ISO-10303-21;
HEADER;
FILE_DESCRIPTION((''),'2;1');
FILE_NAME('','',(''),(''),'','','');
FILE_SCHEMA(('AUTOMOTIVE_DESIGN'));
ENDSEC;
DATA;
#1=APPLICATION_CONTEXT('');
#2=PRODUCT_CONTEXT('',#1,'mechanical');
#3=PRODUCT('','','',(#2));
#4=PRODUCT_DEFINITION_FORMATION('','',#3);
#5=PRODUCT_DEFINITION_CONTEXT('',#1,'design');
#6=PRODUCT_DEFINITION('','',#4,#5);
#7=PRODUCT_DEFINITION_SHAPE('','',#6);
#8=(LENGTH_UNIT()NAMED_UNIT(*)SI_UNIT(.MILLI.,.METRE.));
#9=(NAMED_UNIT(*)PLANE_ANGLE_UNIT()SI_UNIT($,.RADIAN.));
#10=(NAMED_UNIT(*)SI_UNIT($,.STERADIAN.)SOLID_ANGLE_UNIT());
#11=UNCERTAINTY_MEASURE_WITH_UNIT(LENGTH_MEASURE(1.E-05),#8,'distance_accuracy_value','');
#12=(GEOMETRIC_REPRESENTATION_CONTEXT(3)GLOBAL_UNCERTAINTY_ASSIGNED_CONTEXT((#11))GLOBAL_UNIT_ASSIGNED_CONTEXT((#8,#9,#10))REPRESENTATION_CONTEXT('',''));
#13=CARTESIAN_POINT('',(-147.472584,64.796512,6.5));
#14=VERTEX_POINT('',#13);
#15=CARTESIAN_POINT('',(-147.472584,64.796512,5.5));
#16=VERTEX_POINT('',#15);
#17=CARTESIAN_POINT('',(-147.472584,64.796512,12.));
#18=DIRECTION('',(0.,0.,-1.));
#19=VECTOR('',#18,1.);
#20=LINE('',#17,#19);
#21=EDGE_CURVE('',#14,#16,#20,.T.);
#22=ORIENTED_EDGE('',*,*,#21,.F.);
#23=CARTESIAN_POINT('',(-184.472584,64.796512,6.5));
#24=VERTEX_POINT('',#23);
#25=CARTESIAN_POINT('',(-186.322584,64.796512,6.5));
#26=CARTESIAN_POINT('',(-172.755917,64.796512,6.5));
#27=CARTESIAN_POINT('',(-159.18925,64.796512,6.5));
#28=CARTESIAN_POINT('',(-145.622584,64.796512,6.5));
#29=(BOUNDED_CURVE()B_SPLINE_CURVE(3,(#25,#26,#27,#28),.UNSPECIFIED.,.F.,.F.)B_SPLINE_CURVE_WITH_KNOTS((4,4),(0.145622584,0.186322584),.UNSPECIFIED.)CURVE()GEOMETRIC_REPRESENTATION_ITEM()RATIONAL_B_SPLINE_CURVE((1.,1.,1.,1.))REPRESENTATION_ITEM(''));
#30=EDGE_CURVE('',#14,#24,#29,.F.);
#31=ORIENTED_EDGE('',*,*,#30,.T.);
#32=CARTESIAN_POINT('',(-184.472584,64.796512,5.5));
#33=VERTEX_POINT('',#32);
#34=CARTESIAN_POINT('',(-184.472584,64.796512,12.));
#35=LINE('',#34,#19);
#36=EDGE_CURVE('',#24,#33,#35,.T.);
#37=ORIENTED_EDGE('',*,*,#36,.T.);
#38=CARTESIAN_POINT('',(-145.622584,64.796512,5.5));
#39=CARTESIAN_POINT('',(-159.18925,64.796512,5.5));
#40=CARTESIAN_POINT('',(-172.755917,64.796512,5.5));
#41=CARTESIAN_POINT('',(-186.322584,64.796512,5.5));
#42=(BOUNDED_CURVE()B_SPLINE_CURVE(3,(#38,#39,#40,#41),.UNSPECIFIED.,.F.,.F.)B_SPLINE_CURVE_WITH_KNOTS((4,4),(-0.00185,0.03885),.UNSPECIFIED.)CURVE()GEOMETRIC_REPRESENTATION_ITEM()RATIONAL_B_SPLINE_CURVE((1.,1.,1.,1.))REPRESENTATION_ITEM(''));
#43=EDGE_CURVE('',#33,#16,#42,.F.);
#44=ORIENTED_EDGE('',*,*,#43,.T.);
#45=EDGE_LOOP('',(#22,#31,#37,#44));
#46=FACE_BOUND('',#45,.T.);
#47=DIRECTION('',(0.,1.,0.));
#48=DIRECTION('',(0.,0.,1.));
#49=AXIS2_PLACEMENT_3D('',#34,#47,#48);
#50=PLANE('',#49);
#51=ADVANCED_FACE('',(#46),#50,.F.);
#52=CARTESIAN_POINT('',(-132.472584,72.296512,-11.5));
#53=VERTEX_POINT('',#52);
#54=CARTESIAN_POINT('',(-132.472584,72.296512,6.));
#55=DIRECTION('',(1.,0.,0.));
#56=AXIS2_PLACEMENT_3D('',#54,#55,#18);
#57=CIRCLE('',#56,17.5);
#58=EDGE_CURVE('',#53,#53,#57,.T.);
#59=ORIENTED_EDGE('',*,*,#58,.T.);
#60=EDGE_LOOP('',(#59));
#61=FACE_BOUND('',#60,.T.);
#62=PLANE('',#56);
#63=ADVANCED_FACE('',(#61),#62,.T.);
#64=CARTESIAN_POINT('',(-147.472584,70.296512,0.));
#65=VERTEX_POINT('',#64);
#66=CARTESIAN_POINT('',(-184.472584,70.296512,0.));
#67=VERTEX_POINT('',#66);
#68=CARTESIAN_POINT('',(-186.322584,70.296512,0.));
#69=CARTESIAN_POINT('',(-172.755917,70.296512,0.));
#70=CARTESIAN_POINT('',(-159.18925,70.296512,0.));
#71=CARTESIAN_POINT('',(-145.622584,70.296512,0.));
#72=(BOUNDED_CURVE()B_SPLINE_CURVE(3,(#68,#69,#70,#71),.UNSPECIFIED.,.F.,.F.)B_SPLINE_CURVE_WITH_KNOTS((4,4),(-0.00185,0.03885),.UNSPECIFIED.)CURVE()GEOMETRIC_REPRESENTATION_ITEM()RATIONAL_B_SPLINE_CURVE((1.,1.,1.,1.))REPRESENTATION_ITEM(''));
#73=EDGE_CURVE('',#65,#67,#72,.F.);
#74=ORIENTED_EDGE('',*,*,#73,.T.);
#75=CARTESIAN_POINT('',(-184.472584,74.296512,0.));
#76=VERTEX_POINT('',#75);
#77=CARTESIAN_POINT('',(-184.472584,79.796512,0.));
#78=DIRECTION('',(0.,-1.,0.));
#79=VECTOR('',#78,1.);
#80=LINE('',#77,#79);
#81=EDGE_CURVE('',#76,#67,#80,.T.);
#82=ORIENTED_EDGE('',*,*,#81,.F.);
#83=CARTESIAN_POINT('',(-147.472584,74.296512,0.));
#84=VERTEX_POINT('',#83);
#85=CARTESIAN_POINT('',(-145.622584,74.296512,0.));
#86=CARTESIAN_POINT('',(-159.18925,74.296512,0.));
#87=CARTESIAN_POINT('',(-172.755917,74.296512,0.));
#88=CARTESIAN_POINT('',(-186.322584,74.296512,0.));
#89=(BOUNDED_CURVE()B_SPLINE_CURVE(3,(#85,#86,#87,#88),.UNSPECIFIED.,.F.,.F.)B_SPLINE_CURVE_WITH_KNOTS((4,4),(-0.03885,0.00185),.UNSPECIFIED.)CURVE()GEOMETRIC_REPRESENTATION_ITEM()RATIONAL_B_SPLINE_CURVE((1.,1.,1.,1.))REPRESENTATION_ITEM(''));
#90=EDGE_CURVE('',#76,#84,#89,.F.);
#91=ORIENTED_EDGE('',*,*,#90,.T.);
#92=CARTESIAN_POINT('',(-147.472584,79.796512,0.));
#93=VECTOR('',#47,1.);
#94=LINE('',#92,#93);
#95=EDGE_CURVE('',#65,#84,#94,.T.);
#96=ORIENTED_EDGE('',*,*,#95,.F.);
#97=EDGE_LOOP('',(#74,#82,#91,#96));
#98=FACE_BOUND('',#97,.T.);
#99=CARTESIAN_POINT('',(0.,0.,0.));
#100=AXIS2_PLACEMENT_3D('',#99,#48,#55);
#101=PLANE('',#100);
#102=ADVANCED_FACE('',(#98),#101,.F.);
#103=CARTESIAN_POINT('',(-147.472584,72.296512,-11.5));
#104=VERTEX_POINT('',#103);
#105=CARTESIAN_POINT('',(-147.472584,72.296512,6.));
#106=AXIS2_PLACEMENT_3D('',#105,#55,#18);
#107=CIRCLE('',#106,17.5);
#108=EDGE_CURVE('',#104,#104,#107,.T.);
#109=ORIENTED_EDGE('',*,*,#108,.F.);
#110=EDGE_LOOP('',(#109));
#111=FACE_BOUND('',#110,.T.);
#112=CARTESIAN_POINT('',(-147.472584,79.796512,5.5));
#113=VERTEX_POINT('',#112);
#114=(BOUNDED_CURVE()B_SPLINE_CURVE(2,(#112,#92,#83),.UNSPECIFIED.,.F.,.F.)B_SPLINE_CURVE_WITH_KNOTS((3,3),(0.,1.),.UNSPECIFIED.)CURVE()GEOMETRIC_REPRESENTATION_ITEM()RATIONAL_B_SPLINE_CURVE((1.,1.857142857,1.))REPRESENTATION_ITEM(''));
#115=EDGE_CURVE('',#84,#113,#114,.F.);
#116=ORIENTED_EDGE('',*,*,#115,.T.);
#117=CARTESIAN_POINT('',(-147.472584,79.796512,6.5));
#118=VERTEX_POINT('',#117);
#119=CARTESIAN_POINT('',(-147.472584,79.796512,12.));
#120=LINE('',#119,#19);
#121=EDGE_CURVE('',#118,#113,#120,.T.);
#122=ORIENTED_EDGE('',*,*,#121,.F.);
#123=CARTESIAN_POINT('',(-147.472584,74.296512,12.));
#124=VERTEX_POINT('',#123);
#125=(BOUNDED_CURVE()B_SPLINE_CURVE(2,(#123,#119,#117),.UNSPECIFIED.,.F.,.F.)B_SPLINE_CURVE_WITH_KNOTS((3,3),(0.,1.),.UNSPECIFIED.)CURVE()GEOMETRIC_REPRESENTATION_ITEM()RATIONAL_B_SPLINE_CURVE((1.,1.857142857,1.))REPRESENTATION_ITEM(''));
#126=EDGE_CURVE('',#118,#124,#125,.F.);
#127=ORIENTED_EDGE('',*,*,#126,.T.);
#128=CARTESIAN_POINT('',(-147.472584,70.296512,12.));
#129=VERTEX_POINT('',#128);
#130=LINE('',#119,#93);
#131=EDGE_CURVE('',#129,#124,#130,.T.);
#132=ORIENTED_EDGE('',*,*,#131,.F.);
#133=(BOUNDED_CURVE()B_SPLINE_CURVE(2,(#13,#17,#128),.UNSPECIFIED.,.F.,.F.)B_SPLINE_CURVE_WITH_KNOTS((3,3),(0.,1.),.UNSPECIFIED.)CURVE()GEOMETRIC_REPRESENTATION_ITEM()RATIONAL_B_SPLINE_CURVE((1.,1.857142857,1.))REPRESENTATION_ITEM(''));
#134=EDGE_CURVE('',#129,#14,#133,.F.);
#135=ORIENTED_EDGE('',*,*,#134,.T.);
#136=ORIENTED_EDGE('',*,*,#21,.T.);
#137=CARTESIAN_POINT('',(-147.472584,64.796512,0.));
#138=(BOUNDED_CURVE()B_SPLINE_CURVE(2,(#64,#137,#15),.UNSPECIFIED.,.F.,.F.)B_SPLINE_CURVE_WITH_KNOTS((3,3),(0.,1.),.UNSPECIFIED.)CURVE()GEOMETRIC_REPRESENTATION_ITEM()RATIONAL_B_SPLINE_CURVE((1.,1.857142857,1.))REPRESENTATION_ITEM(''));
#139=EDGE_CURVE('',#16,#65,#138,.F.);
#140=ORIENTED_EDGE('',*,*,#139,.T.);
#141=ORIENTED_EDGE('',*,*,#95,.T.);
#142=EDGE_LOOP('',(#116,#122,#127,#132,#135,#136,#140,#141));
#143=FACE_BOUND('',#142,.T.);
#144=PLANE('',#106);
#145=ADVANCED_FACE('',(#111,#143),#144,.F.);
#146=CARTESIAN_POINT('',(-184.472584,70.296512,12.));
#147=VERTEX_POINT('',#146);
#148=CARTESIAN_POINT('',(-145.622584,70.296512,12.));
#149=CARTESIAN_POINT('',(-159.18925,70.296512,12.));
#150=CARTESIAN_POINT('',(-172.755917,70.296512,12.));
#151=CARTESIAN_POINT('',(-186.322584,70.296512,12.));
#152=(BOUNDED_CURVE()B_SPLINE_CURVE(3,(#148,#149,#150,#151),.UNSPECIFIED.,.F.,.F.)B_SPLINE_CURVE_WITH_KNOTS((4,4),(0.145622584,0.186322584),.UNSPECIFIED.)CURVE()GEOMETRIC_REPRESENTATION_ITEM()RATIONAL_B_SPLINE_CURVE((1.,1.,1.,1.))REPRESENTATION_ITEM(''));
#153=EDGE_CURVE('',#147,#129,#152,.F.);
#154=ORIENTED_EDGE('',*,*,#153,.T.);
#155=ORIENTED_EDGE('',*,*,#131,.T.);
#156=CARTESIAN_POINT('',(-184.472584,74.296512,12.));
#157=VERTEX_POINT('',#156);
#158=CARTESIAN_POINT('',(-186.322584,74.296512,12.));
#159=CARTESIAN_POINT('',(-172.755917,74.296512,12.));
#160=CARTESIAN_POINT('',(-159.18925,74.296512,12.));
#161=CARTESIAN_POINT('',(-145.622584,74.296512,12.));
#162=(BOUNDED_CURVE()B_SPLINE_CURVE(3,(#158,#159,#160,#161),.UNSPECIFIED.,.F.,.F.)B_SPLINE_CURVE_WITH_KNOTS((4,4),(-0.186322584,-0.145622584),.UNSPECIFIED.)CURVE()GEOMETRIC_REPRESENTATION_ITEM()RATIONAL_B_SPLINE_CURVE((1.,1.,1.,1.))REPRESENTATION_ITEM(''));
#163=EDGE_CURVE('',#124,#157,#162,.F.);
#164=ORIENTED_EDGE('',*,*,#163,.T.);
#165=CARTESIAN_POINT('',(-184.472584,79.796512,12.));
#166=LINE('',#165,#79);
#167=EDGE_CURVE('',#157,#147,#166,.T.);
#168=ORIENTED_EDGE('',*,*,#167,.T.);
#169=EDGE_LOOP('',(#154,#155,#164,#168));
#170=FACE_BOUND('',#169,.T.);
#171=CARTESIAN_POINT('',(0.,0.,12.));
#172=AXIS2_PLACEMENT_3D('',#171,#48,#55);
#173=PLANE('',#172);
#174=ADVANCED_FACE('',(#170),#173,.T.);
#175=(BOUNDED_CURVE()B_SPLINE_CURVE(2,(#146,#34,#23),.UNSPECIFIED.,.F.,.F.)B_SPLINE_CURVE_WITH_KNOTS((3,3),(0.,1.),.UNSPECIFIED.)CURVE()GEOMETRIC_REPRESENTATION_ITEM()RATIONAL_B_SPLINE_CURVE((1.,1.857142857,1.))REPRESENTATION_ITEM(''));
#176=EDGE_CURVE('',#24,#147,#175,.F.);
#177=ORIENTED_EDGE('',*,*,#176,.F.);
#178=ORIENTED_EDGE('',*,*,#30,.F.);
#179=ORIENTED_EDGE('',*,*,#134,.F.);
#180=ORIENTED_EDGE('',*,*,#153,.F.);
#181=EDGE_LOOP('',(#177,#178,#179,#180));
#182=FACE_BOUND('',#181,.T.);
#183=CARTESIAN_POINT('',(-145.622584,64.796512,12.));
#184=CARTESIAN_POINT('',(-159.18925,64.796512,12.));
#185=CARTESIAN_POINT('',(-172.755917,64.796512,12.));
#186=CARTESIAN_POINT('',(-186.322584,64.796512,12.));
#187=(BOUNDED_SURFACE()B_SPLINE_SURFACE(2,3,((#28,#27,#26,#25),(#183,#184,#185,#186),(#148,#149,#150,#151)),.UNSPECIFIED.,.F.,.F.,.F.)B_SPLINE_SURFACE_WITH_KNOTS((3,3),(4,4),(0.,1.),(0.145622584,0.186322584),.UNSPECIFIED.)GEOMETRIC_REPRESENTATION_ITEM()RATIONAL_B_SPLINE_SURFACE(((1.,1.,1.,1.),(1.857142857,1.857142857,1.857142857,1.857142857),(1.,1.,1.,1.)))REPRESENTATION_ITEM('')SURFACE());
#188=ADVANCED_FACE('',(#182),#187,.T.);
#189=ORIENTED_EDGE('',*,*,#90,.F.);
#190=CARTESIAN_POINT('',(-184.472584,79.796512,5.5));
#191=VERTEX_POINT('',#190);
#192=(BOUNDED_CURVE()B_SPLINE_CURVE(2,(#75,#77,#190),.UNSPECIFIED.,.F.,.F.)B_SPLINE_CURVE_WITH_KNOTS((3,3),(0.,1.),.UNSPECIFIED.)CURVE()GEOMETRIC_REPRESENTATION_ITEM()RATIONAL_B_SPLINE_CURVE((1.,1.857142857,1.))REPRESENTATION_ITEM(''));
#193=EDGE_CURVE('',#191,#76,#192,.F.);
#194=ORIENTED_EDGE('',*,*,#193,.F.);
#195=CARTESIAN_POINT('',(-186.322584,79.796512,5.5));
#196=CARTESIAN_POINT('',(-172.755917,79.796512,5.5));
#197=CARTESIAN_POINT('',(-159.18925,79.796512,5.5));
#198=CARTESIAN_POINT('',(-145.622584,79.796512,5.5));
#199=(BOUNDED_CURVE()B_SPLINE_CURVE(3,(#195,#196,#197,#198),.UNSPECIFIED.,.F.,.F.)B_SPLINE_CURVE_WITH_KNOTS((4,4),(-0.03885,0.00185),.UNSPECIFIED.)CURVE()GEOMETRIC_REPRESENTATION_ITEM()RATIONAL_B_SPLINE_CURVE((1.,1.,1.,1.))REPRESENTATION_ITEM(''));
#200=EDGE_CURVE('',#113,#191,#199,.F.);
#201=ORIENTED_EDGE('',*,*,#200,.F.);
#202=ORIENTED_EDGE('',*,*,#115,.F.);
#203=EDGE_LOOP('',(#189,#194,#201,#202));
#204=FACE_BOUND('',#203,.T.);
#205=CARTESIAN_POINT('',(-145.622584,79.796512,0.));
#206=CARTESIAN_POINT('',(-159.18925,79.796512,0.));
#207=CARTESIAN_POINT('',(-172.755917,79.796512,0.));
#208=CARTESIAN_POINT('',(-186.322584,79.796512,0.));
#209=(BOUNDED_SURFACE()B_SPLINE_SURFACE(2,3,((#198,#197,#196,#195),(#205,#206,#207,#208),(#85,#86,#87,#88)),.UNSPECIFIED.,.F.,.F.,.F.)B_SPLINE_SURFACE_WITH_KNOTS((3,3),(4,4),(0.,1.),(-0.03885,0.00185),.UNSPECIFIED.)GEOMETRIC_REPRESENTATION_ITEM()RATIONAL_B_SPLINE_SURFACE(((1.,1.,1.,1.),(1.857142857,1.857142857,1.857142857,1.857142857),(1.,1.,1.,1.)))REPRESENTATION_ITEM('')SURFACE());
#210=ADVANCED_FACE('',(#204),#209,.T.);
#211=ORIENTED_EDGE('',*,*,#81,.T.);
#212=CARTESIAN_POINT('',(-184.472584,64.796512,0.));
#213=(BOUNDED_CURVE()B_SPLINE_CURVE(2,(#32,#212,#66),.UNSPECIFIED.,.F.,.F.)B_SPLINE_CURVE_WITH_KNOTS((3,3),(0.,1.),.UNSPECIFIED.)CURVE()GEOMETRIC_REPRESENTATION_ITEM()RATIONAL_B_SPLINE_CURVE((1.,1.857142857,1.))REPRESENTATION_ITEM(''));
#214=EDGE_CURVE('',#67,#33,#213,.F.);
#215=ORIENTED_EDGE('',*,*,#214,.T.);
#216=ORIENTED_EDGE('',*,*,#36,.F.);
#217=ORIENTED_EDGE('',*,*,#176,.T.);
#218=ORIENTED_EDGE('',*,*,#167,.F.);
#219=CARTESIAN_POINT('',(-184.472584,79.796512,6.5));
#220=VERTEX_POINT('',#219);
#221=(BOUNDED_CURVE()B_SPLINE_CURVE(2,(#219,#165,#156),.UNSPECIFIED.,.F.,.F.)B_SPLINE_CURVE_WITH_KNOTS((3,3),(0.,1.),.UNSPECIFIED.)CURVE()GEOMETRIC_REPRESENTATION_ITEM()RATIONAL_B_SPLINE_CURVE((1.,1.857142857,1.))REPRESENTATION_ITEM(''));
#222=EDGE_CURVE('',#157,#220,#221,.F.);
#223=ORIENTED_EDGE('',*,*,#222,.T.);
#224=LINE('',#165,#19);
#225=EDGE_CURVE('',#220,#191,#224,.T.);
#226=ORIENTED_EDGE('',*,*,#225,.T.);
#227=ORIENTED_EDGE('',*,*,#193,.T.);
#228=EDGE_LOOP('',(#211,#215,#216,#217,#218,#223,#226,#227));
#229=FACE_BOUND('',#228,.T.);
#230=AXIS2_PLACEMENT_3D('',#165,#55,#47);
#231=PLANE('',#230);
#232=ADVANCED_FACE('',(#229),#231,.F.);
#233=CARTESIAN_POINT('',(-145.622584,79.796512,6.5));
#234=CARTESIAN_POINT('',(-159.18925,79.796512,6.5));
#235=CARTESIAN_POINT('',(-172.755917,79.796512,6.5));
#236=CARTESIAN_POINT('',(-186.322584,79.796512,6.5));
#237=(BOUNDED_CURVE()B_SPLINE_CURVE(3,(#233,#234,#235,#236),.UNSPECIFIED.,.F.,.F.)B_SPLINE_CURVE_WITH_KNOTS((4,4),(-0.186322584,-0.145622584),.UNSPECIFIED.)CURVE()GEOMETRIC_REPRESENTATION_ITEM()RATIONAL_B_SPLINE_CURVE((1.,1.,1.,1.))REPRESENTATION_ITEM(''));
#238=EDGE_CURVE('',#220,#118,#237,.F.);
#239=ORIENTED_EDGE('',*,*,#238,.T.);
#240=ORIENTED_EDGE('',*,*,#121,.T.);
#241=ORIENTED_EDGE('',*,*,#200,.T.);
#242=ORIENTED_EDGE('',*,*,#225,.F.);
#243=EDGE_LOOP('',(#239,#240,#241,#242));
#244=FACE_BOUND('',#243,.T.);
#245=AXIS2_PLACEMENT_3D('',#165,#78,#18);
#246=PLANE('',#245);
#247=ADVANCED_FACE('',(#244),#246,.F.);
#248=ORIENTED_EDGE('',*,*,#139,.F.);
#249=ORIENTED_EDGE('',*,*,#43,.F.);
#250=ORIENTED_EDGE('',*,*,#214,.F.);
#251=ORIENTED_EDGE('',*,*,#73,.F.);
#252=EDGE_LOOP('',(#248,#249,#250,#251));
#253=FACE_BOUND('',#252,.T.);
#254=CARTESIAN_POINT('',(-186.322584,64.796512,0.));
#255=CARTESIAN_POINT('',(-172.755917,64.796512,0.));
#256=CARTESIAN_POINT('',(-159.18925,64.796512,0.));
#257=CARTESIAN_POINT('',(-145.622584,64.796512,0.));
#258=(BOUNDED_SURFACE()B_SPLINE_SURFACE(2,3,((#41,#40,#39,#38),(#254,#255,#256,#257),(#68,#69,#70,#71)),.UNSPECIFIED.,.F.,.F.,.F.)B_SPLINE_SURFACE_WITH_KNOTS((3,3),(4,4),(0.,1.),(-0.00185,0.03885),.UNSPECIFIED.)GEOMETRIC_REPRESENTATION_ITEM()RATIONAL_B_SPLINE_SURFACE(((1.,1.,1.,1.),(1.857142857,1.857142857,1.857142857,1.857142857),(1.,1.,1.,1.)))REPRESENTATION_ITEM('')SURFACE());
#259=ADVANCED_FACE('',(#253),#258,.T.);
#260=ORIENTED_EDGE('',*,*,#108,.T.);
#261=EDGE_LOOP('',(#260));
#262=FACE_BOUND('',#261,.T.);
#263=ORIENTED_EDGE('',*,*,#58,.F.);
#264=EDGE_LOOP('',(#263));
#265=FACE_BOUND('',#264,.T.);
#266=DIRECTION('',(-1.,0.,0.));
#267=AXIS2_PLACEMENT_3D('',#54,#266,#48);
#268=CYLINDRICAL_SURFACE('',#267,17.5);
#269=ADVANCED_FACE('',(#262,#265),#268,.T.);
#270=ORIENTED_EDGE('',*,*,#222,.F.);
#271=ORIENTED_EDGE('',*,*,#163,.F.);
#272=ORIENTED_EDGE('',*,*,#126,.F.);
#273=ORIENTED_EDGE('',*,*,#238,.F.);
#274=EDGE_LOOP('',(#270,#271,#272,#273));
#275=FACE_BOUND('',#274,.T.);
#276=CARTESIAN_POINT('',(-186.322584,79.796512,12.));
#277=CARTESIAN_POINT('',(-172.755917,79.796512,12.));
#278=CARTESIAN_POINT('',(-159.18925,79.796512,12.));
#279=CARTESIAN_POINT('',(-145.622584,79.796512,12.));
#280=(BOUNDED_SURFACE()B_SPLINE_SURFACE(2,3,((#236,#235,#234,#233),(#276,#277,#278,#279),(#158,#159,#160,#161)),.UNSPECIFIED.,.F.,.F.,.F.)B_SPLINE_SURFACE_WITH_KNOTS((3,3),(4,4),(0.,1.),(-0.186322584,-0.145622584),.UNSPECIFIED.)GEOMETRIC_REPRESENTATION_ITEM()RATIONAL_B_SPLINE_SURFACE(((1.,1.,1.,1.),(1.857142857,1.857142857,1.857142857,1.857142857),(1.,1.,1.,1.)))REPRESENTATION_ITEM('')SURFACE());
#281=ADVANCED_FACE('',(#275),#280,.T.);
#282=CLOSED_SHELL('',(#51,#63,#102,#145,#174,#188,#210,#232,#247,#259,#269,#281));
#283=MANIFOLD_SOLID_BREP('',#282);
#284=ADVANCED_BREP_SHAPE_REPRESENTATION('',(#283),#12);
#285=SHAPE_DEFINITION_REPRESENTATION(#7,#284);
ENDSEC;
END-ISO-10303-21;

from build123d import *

# Parameters (mm, degrees)
SKETCH2_W           = 37
SKETCH2_H           = 15
BOSS_EXTRUDE1_DEPTH = 12
SKETCH3_R           = 17.5
BOSS_EXTRUDE2_DEPTH = 15
FILLET1_SIZE        = 5.5


with BuildPart() as part:
    # Sketch2 → Boss-Extrude1 (new body)
    with BuildSketch(Plane.XY):
        with Locations((-165.97258371, 72.296511628)):
            Rectangle(SKETCH2_W, SKETCH2_H)
    extrude(amount=BOSS_EXTRUDE1_DEPTH)

    # Sketch3 → Boss-Extrude2 (add)
    with BuildSketch(Plane(origin=(-147.47258371, 0, 0), x_dir=(0, 0, -1), z_dir=(1, 0, 0))):
        with Locations((-6, 72.296511628)):
            Circle(SKETCH3_R)
    extrude(amount=BOSS_EXTRUDE2_DEPTH)

    # Fillet1
    # a fillet whose section is not a circle: 5.5 mm, written as the material it takes off along each edge
    with BuildSketch(Plane(origin=(-147.47258371, 64.796511628, 0), x_dir=(0, 0, 1), z_dir=(-1, 0, 0)), Plane(origin=(-147.47258371, 64.796511628, 12), x_dir=(0, 1, 0), z_dir=(-1, 0, 0)), Plane(origin=(-198.22258371, 79.796511628, 0), x_dir=(0, 0, 1), z_dir=(1, 0, 0))) as fillet1_piece_1:
        with BuildLine():
            Bezier((FILLET1_SIZE, 0), (0, 0), (0, FILLET1_SIZE), weights=[1, 1.857142857, 1])
            Line((0, FILLET1_SIZE), (0, 0))
            Line((0, 0), (FILLET1_SIZE, 0))
        make_face()
    extrude(amount=50.75, mode=Mode.SUBTRACT)
    with BuildSketch(Plane(origin=(-198.22258371, 79.796511628, 12), x_dir=(0, 0, -1), z_dir=(1, 0, 0))) as fillet1_piece_2:
        with BuildLine():
            Bezier((FILLET1_SIZE, 0), (0, 0), (0, -FILLET1_SIZE), weights=[1, 1.857142857, 1])
            Line((0, -FILLET1_SIZE), (0, 0))
            Line((0, 0), (FILLET1_SIZE, 0))
        make_face()
    extrude(amount=50.75, mode=Mode.SUBTRACT)


solid = part.part
